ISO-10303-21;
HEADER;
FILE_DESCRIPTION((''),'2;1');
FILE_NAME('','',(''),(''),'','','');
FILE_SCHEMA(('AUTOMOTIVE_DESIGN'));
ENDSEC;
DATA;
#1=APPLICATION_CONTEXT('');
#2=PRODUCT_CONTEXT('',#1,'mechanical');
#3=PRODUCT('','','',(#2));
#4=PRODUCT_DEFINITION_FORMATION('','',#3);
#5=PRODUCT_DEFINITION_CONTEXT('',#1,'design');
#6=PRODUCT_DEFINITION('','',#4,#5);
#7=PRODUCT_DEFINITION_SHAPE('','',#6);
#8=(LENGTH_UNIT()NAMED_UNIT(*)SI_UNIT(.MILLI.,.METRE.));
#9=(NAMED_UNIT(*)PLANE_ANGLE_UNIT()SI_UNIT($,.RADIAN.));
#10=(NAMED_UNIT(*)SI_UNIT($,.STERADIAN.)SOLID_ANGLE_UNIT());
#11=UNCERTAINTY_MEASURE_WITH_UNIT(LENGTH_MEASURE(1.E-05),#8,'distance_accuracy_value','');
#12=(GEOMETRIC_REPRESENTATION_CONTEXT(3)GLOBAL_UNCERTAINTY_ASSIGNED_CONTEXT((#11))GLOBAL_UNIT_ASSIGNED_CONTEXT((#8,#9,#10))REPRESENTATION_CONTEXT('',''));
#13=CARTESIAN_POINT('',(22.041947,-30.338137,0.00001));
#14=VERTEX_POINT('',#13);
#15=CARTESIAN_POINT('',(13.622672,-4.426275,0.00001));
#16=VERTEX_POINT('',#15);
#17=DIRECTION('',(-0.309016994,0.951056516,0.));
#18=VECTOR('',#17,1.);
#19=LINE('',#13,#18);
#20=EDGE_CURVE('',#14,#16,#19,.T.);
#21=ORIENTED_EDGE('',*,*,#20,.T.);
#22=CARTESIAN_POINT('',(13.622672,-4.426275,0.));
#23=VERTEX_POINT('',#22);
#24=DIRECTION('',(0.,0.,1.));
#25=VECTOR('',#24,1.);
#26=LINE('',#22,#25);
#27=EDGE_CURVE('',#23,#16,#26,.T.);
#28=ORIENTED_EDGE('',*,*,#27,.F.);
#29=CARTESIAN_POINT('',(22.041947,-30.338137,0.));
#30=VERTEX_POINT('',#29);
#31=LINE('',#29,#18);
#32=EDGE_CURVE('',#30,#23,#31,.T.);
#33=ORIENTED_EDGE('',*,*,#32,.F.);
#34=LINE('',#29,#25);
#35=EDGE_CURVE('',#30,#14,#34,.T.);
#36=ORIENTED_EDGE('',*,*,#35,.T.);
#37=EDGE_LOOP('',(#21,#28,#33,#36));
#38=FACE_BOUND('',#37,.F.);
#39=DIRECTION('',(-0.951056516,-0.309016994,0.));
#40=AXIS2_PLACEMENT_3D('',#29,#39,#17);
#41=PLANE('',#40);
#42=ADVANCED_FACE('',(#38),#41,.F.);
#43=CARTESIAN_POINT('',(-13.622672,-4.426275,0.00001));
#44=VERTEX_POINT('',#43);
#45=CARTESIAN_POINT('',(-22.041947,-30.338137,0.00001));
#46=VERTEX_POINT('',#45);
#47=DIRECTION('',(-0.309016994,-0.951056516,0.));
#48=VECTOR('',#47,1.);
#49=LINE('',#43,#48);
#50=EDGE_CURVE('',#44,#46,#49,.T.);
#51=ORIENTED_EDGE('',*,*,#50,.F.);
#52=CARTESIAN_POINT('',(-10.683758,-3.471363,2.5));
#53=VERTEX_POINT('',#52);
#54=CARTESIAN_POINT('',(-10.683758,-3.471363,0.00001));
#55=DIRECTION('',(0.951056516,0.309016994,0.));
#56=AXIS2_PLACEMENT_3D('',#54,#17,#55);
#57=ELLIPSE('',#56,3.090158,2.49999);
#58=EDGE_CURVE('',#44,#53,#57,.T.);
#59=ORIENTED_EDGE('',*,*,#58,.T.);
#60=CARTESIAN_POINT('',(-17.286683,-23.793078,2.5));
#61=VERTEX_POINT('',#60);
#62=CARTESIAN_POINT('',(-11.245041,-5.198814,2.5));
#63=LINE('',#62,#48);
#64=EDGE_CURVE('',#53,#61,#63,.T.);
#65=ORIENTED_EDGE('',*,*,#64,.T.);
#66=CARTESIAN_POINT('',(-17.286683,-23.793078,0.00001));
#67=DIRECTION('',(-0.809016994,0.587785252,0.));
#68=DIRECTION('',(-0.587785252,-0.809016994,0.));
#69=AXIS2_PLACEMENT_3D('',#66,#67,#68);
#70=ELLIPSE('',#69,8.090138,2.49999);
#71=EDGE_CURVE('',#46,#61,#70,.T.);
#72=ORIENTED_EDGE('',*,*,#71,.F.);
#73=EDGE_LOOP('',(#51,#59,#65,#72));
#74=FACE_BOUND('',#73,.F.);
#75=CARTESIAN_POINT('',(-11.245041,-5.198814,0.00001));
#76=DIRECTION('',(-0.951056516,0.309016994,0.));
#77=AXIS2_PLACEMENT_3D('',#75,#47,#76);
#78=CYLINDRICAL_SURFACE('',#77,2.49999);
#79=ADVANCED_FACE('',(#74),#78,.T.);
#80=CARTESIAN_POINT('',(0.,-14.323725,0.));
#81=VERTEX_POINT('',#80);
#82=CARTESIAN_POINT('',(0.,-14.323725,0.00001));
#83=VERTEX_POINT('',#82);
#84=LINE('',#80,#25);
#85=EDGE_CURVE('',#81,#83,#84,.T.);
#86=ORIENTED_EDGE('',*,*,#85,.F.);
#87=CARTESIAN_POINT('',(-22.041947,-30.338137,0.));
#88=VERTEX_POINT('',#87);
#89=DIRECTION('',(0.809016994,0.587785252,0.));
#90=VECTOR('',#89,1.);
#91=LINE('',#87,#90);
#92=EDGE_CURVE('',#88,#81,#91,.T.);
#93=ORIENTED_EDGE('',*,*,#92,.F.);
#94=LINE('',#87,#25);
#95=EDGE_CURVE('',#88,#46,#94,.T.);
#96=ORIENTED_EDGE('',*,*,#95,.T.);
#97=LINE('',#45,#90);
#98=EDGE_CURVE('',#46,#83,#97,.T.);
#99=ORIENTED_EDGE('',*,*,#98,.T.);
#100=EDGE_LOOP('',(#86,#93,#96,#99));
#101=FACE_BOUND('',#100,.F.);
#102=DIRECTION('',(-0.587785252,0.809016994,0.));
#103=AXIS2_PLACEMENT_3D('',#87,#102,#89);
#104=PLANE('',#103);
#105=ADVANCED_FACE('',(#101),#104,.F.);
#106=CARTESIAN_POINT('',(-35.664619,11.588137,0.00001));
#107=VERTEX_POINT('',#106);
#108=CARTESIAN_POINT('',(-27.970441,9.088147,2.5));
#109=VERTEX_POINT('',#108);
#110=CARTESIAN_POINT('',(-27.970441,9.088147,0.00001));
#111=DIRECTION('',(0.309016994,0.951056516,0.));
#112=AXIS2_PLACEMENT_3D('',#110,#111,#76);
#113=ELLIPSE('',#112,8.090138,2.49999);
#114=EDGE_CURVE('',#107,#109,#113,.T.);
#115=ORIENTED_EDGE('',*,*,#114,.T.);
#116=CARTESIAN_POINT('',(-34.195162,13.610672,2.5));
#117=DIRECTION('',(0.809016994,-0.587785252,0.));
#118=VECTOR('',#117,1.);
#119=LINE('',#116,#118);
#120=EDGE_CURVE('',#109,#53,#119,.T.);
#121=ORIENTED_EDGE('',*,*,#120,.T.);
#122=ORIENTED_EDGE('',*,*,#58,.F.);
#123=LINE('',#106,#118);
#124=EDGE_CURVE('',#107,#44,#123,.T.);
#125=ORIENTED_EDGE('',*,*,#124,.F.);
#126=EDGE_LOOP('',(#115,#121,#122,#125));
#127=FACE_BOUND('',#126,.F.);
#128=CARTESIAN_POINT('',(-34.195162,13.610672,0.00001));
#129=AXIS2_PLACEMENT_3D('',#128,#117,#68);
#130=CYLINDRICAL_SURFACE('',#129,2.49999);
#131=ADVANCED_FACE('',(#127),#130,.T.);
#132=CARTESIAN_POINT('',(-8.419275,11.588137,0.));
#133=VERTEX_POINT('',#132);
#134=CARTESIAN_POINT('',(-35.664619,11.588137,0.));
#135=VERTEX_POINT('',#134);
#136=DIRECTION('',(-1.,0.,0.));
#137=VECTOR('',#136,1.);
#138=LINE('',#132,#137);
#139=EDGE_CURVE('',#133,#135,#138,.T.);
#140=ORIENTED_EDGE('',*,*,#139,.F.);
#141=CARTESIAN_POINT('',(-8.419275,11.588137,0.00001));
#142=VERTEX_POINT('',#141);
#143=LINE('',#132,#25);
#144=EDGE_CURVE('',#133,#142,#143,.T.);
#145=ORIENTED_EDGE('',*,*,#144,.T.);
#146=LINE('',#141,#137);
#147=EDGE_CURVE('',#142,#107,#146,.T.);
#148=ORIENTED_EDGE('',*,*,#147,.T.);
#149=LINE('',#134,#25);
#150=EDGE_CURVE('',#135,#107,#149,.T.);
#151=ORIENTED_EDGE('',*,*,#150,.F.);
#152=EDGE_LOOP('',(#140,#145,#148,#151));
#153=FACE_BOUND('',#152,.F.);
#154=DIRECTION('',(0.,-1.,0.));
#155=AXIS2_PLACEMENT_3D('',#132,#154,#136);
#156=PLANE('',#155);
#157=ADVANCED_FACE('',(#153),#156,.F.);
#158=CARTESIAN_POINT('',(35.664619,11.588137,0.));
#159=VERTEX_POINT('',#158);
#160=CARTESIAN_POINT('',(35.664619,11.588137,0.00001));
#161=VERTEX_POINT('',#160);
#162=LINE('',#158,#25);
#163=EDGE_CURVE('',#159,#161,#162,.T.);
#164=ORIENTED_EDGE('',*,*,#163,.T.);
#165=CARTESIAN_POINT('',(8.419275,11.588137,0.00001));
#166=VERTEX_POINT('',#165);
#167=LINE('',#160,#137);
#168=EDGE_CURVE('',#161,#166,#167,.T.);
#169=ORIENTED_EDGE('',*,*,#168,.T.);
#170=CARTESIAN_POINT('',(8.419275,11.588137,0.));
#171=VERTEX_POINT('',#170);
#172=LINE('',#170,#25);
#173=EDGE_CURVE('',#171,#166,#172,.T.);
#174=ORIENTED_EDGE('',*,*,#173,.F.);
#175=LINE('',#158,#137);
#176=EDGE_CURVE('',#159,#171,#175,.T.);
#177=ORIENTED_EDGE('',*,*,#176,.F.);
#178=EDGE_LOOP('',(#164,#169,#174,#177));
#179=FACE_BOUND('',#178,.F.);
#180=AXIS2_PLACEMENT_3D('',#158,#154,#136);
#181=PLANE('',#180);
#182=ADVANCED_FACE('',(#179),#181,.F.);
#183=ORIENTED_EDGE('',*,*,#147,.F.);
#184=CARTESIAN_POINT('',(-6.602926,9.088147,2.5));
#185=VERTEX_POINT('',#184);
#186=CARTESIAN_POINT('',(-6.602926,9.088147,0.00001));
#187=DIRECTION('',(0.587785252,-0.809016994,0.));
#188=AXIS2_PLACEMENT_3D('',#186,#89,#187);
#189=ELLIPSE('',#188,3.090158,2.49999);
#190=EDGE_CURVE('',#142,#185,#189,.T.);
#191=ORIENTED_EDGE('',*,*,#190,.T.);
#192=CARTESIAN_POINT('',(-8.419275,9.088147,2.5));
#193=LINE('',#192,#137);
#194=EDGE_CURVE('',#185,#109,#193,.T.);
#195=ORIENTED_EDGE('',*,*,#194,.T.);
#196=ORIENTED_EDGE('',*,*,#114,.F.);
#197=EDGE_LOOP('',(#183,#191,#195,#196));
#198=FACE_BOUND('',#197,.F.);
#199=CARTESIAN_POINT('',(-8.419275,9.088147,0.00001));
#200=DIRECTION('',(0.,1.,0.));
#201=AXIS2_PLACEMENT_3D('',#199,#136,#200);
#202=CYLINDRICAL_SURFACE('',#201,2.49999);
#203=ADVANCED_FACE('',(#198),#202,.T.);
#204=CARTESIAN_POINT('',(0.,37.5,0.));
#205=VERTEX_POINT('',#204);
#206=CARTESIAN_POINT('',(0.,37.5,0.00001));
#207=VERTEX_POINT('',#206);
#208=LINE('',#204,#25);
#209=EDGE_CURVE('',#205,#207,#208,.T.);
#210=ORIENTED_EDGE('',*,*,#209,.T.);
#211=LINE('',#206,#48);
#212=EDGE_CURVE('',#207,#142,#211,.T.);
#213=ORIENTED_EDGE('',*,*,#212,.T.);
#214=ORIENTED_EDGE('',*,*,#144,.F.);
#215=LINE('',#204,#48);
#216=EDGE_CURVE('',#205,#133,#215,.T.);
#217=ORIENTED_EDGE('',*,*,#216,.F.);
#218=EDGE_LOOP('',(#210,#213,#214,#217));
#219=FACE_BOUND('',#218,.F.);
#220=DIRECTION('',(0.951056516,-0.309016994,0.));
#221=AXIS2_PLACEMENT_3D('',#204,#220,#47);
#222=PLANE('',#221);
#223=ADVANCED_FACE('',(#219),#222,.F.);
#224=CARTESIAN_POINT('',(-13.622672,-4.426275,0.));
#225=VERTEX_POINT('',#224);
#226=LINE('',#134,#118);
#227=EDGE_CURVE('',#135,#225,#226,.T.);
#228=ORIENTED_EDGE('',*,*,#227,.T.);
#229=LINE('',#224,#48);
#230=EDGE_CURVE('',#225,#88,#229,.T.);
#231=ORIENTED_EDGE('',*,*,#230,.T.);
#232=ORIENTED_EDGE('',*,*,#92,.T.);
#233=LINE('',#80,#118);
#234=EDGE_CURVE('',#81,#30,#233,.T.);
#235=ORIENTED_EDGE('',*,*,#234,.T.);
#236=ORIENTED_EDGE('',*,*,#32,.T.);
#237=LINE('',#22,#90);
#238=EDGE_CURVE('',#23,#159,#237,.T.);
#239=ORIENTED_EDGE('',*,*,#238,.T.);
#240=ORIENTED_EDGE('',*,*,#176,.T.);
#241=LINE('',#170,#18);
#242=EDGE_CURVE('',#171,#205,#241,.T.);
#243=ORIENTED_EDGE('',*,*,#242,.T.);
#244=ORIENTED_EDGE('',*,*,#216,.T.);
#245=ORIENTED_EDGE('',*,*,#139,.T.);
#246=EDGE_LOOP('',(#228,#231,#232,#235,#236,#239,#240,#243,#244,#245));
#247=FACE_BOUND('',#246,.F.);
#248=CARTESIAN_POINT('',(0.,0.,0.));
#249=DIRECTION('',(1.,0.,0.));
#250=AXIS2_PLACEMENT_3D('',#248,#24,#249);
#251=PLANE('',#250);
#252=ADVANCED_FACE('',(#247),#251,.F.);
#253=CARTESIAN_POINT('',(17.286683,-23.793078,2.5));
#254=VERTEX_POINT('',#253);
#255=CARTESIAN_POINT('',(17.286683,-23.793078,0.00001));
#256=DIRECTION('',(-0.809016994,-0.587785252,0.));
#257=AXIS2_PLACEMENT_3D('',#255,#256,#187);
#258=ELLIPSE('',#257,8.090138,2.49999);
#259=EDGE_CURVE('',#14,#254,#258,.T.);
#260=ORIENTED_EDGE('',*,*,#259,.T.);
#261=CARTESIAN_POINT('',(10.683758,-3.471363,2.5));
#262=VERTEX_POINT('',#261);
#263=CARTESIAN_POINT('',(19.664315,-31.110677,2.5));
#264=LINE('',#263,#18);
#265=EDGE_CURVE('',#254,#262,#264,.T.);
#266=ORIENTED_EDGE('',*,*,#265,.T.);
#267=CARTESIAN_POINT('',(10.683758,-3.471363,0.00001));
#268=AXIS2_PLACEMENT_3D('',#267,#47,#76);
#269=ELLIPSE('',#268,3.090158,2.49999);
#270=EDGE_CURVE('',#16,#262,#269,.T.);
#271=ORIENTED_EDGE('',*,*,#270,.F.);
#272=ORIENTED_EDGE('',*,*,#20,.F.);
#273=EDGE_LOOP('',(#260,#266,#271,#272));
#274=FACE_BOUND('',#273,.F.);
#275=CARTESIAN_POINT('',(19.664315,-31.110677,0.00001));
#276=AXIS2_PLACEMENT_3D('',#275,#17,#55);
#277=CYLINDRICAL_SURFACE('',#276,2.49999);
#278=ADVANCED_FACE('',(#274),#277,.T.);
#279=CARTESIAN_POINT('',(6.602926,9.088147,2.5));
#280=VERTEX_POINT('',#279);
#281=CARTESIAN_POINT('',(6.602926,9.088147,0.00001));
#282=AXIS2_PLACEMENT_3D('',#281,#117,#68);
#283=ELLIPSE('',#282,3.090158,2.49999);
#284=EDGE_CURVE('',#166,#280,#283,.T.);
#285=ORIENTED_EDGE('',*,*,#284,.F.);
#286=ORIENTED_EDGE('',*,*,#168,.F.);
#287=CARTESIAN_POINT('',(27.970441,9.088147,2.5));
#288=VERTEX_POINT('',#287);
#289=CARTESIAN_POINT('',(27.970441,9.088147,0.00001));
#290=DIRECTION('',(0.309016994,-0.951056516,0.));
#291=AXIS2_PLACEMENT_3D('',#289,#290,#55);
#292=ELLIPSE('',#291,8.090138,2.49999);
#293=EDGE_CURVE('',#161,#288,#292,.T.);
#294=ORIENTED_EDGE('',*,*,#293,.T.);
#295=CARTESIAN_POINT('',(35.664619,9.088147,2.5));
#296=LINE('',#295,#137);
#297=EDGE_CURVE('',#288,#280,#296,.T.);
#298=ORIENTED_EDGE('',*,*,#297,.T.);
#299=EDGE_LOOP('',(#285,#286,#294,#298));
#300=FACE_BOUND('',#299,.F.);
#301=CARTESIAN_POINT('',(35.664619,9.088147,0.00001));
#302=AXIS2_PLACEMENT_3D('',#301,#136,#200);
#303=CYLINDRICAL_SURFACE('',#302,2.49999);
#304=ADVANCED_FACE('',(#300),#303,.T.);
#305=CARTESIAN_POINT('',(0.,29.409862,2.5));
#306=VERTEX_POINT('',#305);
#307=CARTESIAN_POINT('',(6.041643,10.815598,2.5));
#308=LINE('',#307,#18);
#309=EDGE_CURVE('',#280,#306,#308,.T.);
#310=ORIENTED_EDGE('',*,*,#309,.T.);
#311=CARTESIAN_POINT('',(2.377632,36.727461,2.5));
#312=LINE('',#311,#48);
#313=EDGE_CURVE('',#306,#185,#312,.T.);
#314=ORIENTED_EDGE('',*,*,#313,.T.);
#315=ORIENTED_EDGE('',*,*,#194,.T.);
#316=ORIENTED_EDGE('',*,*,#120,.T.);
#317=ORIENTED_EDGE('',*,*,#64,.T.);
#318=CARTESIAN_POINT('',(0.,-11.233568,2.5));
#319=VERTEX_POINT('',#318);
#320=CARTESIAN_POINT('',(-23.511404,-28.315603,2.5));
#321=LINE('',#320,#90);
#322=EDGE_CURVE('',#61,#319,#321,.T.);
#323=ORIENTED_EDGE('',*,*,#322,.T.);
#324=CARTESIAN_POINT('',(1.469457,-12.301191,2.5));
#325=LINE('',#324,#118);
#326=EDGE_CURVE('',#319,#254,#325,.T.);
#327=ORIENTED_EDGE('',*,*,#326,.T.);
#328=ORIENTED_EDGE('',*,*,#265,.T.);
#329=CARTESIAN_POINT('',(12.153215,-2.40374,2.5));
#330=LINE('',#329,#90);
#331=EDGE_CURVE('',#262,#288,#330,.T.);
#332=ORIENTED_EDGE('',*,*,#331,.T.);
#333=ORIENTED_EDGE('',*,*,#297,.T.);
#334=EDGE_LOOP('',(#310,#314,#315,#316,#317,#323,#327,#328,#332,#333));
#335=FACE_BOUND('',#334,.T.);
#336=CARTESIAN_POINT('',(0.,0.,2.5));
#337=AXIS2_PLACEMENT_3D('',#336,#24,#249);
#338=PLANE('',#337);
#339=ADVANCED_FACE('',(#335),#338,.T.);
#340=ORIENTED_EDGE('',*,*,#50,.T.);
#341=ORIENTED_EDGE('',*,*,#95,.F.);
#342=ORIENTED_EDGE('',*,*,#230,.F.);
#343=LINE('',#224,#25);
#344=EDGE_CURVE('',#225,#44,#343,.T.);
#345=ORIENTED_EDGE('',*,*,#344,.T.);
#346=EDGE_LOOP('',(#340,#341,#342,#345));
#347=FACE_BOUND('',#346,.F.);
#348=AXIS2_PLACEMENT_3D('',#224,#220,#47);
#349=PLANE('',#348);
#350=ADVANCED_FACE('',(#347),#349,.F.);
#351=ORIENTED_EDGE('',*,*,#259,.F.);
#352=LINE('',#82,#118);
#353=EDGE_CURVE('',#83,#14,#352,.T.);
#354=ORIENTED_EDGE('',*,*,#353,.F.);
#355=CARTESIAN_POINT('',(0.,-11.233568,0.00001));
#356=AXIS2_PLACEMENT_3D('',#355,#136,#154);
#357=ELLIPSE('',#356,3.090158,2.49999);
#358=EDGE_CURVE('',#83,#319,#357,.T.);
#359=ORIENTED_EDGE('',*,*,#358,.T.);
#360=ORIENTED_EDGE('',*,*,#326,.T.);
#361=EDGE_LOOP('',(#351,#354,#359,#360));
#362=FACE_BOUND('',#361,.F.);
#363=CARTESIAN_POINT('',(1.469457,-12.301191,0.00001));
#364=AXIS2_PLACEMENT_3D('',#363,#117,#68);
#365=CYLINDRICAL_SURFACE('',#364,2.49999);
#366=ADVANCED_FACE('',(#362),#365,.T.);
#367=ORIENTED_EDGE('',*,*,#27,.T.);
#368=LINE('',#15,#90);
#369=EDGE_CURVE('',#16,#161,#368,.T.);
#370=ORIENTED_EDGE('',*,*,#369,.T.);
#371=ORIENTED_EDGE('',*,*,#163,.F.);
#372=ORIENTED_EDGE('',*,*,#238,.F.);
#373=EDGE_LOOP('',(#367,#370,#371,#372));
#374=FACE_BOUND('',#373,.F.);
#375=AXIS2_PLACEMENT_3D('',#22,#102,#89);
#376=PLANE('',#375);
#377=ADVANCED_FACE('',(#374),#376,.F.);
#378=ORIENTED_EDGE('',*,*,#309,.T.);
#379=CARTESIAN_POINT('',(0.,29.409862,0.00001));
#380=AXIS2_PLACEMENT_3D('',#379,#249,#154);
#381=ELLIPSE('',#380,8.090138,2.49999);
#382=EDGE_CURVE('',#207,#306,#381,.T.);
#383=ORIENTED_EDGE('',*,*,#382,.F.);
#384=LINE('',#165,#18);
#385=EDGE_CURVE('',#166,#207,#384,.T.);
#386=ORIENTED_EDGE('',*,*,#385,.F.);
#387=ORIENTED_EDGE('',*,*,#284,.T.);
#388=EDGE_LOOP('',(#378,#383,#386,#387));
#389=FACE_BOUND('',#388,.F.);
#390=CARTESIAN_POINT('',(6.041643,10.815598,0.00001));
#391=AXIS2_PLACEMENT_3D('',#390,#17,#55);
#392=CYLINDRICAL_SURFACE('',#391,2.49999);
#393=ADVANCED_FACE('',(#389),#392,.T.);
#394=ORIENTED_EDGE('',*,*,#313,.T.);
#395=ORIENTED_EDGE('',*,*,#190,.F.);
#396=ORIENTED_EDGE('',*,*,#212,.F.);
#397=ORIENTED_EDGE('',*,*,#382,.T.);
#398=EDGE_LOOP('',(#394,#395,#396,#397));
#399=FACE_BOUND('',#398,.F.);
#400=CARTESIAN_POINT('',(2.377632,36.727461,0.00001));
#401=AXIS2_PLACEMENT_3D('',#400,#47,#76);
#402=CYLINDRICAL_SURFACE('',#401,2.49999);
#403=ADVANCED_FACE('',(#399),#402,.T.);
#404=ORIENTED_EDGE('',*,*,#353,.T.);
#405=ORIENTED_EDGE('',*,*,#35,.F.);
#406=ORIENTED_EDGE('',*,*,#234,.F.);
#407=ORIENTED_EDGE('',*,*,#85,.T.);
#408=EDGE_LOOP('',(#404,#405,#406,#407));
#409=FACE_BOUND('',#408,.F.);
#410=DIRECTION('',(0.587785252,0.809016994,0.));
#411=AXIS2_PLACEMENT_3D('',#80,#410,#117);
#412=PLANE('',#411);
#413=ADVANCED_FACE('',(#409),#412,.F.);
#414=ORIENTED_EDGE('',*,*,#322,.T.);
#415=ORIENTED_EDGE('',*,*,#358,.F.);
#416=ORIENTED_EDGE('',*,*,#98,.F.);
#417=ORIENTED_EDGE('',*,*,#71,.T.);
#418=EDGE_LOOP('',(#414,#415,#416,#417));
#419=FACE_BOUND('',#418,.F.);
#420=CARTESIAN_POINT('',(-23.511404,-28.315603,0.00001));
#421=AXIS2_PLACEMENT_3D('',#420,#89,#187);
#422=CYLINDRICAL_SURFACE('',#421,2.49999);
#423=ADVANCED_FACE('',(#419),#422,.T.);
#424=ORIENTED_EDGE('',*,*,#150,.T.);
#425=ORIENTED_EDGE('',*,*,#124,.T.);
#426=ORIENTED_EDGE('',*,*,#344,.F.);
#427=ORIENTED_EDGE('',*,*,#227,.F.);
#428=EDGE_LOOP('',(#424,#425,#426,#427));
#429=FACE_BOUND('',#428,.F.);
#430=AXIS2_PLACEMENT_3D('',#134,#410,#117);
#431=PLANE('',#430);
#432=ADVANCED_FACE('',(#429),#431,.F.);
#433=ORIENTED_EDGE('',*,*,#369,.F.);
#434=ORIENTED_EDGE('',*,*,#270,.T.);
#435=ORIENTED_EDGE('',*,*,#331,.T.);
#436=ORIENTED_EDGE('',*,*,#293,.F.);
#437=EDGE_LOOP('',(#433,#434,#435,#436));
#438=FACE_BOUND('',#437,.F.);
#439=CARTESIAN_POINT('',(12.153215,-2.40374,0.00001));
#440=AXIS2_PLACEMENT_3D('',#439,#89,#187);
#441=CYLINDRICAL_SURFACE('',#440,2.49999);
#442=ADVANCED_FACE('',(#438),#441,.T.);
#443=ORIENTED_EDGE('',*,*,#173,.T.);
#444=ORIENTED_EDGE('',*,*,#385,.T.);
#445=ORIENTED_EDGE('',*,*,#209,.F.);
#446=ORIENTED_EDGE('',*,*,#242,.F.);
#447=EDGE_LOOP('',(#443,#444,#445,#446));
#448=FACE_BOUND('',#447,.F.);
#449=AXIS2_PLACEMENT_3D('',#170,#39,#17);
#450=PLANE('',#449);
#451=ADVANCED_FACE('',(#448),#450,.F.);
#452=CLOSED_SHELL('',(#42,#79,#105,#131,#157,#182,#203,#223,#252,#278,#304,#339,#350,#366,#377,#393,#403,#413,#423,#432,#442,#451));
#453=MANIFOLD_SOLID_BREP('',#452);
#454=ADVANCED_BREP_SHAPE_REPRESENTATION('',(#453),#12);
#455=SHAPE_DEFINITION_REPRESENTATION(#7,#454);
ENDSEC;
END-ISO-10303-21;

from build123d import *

# Parameters (mm, degrees)
F1_DEPTH = 2.5
F2_R     = 2.49999


# Not quite as in the source:
# - a fillet or chamfer is up to 0.001 mm smaller than in the source, because OpenCascade refuses the exact size


with BuildPart() as f1:
    # F0 (on Top) → F1 (new body)
    with BuildSketch(Plane.XY):
        Polygon((-8.4192745609, 11.5881372891), (-35.6646193611, 11.5881372891), (-13.6226724001, -4.4262745781), (-22.041946961, -30.3381372891), (0, -14.3237254219), (22.041946961, -30.3381372891), (13.6226724001, -4.4262745781), (35.6646193611, 11.5881372891), (8.4192745609, 11.5881372891), (0, 37.5), align=None)
    extrude(amount=F1_DEPTH)

    # F2 (radius 2.5 in the source; OpenCascade refuses exactly that, so slightly less here)
    f2_edges = [f1.edges().sort_by_distance(p)[0] for p in [
        (-4.209637, 24.544069, 2.5),
        (-22.041947, 11.588137, 2.5),
        (-24.643646, 3.580931, 2.5),
        (-17.83231, -17.382206, 2.5),
        (11.020973, -22.330931, 2.5),
        (17.83231, -17.382206, 2.5),
        (24.643646, 3.580931, 2.5),
        (22.041947, 11.588137, 2.5),
        (4.209637, 24.544069, 2.5),
        (-11.020973, -22.330931, 2.5),
    ]]
    fillet(f2_edges, radius=F2_R)


solid = f1.part
